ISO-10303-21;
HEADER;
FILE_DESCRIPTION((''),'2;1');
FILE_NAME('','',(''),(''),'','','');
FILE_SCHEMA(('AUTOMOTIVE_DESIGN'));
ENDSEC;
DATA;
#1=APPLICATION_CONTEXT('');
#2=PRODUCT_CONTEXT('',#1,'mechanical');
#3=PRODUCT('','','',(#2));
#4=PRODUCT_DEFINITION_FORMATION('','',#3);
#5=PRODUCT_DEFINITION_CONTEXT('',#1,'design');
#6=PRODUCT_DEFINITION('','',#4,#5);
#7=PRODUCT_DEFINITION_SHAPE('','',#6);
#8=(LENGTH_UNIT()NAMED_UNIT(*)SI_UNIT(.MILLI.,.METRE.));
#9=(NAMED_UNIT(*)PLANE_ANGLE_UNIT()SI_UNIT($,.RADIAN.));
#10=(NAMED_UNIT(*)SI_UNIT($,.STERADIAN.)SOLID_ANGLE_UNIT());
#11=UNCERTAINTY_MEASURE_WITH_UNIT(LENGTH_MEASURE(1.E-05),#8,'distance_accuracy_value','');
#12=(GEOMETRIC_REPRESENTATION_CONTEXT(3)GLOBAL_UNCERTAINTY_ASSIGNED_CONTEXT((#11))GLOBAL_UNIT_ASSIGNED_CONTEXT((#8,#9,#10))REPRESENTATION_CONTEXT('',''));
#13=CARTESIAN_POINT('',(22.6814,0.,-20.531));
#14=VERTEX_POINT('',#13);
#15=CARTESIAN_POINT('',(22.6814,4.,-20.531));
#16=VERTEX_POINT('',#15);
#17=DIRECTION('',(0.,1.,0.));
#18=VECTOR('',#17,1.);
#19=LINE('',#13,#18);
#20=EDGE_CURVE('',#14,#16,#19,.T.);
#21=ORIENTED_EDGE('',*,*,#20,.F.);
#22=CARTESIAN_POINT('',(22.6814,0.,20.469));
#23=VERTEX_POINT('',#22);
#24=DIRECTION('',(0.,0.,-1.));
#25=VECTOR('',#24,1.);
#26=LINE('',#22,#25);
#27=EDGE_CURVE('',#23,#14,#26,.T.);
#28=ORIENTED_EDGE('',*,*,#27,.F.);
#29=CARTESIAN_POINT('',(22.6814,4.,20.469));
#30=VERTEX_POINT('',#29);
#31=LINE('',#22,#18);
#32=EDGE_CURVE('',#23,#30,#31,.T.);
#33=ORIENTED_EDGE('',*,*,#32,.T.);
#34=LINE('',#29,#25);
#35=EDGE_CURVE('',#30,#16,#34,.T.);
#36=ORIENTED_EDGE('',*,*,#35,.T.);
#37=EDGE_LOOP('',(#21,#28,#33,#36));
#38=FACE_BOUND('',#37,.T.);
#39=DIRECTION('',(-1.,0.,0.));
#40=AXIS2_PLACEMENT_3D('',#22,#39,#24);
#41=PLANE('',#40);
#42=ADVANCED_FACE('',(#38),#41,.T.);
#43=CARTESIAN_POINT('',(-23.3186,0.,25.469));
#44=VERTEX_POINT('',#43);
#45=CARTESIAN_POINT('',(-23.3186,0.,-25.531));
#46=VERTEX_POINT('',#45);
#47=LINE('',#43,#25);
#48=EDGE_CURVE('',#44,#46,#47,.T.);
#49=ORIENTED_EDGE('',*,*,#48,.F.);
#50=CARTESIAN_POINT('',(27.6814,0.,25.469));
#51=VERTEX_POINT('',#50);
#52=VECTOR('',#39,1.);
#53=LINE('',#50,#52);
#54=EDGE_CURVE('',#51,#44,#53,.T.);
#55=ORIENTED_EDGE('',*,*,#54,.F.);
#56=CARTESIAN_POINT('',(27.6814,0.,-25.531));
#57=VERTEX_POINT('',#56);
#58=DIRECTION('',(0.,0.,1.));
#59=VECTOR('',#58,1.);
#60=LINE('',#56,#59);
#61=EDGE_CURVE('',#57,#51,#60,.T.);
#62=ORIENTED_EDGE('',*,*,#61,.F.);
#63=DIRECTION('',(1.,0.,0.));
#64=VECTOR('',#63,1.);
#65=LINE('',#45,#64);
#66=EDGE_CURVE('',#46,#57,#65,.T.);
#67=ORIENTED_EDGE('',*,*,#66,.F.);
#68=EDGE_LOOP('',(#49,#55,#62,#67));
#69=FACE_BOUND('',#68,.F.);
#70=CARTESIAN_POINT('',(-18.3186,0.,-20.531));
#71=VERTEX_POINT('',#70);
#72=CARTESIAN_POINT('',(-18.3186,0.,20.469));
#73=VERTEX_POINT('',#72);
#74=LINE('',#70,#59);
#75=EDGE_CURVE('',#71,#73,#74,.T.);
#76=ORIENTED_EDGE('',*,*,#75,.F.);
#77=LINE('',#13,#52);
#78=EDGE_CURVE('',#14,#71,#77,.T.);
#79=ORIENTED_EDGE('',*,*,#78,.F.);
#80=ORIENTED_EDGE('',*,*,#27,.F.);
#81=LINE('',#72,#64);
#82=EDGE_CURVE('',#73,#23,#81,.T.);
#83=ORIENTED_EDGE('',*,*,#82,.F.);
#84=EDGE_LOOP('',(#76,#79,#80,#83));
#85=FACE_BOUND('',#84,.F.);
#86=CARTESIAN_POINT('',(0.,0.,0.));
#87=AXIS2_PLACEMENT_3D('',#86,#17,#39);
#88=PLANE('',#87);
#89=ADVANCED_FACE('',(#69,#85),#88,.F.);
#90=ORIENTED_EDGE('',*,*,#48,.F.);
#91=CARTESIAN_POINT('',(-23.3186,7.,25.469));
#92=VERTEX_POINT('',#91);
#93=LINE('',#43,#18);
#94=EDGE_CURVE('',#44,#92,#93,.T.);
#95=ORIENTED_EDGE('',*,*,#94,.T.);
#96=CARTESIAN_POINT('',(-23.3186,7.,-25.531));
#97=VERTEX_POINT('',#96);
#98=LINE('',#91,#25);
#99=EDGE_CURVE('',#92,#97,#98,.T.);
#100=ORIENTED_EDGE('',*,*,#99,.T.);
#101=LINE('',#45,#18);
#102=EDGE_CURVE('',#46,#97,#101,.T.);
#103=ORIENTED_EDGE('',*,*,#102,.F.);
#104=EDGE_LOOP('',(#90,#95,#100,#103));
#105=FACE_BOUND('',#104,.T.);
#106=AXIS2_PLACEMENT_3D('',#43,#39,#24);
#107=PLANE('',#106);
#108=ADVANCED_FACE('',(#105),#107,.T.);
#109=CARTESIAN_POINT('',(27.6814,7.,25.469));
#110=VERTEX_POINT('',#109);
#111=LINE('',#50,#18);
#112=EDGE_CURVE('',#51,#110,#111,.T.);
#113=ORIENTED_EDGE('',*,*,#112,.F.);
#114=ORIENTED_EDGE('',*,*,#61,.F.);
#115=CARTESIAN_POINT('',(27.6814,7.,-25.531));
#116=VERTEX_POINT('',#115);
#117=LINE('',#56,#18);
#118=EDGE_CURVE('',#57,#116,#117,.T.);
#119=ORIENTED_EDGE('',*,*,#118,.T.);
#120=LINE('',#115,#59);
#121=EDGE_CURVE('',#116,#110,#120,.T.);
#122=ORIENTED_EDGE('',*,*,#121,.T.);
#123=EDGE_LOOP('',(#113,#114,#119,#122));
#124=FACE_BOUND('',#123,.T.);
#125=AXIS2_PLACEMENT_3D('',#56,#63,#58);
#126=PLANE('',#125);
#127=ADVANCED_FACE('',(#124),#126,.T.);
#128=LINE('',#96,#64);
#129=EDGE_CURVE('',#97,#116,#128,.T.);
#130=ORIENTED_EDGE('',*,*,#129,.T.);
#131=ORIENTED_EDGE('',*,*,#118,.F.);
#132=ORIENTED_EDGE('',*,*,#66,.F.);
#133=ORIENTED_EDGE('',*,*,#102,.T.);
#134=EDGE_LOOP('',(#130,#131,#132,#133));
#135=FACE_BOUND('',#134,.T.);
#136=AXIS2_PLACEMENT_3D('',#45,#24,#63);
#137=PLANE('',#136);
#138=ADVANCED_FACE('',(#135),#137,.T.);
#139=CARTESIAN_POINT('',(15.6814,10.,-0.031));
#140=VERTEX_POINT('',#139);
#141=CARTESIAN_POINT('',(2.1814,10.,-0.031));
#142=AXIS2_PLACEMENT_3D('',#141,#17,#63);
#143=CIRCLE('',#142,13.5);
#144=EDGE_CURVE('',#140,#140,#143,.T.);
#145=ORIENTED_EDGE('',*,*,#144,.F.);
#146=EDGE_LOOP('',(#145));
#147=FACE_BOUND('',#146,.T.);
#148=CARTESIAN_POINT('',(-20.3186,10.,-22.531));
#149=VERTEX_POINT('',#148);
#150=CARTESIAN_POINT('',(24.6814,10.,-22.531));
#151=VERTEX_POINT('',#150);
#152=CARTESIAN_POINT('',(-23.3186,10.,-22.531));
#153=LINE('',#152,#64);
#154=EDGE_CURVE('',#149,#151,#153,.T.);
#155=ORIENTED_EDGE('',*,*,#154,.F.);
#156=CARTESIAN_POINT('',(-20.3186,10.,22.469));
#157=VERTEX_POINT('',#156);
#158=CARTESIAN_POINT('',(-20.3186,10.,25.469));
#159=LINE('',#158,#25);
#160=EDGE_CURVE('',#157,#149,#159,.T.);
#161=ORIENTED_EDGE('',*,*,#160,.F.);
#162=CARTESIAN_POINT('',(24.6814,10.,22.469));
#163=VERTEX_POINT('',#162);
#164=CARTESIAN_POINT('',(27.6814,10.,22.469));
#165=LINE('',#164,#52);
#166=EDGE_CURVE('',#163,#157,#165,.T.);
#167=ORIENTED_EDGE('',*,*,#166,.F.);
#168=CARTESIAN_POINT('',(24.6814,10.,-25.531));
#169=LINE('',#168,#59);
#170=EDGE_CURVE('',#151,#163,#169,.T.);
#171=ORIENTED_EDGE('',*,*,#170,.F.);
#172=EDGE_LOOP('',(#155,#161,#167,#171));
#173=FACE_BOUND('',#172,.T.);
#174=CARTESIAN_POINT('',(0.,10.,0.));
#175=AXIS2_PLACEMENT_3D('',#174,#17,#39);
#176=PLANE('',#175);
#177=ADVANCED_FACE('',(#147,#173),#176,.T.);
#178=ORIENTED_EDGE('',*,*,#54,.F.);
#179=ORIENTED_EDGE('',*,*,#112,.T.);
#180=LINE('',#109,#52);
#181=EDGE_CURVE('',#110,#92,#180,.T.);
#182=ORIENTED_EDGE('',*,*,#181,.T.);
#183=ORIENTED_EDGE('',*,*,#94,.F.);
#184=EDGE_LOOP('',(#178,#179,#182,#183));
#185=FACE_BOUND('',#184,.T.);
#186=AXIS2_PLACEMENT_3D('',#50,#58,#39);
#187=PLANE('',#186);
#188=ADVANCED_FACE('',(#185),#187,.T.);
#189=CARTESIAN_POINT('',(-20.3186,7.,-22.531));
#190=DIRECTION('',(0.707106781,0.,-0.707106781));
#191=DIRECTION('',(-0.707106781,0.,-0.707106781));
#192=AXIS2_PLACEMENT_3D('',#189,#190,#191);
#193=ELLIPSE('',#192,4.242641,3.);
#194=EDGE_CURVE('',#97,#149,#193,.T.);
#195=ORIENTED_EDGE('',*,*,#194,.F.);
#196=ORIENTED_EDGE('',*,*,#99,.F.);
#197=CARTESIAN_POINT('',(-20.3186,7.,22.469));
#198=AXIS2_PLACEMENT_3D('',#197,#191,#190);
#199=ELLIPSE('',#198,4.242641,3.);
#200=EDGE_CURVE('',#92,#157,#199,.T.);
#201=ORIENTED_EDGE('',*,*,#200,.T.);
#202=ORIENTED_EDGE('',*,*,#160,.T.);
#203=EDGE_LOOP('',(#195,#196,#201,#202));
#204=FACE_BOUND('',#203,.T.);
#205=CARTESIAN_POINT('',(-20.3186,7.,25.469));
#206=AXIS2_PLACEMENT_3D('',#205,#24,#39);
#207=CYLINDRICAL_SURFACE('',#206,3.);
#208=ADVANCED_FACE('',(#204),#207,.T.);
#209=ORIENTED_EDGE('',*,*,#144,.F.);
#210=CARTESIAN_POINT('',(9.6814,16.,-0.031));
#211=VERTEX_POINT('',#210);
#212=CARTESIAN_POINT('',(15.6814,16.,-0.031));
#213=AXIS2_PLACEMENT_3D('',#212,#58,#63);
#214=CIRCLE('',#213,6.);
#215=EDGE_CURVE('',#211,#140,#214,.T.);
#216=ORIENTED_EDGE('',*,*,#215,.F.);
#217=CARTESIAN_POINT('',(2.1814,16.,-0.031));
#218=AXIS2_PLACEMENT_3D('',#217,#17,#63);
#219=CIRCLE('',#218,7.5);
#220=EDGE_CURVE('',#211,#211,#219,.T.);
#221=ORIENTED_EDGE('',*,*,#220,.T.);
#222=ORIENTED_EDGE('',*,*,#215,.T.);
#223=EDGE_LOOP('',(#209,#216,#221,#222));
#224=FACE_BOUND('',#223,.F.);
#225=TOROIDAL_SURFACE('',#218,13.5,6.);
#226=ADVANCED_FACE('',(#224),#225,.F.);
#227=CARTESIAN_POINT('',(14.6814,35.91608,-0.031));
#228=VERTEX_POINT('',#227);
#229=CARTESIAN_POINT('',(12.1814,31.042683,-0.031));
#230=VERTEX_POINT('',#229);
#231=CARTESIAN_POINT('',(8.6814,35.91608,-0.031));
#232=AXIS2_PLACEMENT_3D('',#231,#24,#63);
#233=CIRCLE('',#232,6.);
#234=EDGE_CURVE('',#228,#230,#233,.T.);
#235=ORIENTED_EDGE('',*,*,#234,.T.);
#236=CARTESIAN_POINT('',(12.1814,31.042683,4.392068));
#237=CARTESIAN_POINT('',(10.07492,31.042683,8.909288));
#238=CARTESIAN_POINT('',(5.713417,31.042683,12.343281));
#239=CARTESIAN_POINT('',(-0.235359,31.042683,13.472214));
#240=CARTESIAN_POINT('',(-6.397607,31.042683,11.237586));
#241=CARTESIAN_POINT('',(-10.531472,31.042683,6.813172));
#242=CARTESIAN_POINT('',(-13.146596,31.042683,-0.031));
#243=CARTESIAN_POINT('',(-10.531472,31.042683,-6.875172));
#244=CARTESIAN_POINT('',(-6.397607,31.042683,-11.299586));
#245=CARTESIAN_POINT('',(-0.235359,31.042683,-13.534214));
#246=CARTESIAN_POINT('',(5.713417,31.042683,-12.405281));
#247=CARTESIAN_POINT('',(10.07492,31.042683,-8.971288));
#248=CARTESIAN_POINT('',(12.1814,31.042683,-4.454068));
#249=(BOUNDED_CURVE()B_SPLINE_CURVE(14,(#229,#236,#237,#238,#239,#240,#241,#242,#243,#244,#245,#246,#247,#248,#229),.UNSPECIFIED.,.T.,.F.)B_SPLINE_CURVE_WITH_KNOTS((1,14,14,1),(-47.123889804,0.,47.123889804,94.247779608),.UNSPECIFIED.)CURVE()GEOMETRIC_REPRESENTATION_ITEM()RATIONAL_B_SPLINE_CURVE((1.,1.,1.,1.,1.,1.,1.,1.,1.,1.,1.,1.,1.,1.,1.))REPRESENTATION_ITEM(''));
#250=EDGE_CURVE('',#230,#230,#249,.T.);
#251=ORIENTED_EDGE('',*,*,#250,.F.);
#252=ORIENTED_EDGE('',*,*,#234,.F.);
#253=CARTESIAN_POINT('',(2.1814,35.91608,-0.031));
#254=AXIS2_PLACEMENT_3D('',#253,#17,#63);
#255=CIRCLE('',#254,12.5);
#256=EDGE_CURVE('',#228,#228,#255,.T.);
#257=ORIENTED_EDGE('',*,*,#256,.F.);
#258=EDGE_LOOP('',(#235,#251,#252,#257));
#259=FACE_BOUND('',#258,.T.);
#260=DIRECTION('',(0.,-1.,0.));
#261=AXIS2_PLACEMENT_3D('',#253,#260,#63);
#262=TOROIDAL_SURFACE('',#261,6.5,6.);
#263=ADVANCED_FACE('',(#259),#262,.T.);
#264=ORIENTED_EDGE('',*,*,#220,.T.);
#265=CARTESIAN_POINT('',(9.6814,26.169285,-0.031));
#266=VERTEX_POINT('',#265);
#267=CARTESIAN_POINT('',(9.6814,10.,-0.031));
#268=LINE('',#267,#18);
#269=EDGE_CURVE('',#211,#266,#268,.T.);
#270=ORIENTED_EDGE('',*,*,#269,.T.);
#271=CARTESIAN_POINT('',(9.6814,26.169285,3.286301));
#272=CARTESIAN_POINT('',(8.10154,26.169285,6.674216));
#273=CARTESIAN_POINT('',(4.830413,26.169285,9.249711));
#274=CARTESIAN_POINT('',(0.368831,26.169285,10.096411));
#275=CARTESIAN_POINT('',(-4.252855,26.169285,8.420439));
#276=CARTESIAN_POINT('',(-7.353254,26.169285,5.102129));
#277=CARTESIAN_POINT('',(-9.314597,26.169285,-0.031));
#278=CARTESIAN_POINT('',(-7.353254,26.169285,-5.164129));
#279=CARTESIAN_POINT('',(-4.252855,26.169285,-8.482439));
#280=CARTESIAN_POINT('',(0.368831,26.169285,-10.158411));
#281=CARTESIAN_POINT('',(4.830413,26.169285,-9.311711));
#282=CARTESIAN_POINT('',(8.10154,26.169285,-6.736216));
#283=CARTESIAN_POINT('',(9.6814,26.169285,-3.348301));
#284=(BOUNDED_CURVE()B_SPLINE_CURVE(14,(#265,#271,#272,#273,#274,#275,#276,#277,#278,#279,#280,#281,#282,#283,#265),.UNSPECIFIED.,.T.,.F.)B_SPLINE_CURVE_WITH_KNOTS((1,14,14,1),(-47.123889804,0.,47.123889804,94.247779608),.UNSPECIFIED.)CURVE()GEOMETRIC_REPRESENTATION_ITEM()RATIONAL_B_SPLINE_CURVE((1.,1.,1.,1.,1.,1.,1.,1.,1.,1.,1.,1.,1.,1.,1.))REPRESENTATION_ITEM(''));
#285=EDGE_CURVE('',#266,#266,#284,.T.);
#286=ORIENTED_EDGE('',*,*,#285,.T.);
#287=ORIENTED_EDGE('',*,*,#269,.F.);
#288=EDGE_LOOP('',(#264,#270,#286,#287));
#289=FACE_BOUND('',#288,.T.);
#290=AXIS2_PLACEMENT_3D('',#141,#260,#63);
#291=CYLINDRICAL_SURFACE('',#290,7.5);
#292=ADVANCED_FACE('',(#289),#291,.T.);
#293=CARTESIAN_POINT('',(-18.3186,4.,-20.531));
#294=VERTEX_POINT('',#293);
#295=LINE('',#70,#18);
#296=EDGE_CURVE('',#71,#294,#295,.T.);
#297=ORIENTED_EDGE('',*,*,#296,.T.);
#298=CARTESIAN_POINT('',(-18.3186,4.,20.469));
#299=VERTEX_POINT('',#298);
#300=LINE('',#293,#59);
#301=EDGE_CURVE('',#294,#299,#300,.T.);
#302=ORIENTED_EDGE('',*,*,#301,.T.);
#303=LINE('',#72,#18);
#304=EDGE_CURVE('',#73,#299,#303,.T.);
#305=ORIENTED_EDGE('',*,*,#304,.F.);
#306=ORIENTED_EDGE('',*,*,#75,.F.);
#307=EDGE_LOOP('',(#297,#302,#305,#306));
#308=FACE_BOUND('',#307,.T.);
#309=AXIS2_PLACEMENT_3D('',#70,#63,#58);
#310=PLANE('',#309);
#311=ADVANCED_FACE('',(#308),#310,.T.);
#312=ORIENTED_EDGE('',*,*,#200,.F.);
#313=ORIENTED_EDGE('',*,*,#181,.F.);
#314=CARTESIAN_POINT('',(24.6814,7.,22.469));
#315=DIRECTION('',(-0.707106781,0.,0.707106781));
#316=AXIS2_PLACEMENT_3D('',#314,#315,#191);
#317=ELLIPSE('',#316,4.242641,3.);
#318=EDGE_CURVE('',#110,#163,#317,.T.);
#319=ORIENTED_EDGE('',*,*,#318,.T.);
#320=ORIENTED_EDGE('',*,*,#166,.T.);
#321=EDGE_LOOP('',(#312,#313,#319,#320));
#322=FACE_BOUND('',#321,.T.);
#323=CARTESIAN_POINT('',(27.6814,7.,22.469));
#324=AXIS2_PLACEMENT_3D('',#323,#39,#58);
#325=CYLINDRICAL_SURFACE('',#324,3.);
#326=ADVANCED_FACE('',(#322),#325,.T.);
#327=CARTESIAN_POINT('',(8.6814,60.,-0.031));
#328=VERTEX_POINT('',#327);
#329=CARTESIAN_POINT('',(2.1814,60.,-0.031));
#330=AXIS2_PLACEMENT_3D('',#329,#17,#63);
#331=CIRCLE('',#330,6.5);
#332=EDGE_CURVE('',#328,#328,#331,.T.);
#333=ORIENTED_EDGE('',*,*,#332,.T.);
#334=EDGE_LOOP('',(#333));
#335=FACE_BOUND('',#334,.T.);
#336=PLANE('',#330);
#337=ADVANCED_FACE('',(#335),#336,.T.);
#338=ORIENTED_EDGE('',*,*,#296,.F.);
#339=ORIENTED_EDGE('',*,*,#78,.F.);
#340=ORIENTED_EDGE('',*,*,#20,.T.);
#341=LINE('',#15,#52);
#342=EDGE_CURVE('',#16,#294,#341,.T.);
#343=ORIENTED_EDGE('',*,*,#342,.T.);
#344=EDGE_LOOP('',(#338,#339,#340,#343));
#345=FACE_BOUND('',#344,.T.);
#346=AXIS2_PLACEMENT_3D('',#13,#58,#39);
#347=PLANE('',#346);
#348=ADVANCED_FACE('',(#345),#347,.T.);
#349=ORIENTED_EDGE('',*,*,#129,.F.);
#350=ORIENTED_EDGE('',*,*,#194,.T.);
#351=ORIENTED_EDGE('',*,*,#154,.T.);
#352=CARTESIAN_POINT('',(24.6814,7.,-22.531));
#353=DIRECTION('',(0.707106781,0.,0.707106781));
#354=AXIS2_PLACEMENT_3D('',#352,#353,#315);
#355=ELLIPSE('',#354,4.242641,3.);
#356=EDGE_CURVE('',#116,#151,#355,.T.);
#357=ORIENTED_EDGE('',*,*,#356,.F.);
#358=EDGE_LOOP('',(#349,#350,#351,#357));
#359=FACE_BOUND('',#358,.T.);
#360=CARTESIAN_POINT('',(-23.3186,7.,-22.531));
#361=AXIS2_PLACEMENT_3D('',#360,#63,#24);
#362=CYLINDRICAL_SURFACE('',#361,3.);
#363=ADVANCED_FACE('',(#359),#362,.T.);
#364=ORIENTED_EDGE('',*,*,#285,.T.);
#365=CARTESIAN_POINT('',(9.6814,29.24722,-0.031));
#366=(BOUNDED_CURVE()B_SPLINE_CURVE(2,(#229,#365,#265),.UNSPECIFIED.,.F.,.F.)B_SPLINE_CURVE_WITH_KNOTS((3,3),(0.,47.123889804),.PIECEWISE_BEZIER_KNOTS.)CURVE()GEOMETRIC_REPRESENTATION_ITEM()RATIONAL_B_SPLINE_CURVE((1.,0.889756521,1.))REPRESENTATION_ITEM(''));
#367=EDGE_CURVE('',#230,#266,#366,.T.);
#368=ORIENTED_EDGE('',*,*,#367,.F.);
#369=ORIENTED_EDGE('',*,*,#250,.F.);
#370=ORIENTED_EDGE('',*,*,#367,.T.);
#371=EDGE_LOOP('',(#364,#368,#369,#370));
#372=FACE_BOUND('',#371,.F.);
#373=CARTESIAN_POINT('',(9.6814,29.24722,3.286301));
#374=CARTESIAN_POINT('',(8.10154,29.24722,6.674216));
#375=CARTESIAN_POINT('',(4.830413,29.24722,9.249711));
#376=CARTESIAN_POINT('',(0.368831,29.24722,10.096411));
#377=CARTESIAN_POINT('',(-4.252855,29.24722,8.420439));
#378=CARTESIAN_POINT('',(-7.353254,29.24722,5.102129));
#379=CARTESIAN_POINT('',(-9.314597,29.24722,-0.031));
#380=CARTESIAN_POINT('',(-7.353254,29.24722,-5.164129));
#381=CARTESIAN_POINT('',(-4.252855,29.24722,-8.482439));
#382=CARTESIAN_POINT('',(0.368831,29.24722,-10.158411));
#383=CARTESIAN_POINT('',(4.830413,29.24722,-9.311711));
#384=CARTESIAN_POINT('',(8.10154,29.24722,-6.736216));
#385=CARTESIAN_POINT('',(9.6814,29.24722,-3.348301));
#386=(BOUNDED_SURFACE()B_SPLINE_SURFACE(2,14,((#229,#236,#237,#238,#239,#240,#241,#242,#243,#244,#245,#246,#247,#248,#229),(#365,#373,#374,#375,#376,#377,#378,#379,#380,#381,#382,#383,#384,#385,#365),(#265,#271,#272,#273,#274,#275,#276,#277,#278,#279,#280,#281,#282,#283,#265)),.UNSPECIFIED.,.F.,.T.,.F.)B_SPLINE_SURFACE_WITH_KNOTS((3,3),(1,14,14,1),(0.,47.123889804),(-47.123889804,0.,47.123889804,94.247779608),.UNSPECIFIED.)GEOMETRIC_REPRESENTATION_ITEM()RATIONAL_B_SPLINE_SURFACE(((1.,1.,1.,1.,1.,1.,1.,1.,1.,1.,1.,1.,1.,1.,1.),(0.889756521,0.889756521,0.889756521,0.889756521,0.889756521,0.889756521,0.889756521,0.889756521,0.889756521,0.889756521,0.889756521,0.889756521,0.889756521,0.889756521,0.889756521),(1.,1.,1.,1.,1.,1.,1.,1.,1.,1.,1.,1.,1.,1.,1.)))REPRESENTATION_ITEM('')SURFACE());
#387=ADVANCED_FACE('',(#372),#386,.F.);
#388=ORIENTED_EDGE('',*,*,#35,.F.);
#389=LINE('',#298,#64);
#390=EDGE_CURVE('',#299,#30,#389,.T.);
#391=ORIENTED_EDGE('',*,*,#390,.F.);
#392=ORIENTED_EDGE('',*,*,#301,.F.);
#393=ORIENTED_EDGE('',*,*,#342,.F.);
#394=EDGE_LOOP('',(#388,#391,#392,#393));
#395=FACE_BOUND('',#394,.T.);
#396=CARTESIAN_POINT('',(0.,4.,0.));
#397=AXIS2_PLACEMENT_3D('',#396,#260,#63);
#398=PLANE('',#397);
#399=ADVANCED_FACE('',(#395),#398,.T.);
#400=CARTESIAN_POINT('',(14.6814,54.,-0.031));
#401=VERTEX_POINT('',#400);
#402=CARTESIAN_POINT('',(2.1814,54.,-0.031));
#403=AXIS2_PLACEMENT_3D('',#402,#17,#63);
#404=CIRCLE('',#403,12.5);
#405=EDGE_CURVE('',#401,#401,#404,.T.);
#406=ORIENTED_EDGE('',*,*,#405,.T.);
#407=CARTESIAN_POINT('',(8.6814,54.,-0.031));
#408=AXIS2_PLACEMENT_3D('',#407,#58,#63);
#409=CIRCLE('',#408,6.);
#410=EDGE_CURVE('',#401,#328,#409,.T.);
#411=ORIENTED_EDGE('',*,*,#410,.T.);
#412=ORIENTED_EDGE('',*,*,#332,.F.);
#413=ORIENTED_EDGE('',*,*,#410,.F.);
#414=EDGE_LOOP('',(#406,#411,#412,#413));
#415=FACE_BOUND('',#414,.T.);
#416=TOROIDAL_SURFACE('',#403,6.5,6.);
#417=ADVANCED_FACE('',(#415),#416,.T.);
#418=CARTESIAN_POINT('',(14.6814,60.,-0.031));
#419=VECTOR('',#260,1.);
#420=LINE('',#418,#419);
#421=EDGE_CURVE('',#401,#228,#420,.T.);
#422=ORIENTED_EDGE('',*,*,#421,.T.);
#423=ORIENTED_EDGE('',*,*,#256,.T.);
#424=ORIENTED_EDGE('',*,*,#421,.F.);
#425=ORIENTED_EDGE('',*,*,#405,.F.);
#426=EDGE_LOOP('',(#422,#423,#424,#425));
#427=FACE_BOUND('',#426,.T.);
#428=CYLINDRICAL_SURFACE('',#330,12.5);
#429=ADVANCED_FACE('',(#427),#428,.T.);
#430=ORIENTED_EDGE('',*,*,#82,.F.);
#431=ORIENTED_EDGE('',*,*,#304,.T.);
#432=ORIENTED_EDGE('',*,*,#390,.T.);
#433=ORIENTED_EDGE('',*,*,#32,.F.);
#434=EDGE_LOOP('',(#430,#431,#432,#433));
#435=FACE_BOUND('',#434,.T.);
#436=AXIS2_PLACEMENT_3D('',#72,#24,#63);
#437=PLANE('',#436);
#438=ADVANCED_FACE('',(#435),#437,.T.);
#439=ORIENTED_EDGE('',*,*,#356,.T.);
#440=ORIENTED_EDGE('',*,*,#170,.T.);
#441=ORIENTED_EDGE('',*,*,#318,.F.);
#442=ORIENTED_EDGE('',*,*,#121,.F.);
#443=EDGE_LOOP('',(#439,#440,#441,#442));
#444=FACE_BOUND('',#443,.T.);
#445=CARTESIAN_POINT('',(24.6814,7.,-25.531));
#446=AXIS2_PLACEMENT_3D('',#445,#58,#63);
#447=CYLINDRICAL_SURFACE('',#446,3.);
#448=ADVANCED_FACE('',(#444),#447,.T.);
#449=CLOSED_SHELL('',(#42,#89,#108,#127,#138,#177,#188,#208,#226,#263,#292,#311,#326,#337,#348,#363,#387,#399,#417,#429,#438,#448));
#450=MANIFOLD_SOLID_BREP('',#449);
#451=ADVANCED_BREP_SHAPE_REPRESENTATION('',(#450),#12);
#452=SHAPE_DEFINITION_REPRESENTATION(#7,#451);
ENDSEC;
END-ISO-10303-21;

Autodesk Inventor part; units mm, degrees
ref_plane "YZ Plane" through (0, 0, 0) normal (1, 0, 0) x (0, 1, 0)
ref_plane "XZ Plane" through (0, 0, 0) normal (0, 1, 0) x (-1, 0, 0)
ref_plane "XY Plane" through (0, 0, 0) normal (0, 0, 1) x (1, 0, 0)
sketch "Sketch2" plane through (0, 0, 0) normal (0, 1, 0) x (-1, 0, 0)
  line L0 (18.3186, 20.469) -> (-22.6814, 20.469)
  line L1 (-22.6814, 20.469) -> (-22.6814, -20.531)
  line L2 (-22.6814, -20.531) -> (18.3186, -20.531)
  line L3 (18.3186, -20.531) -> (18.3186, 20.469)
  line L4 (-27.6814, 25.469) -> (23.3186, 25.469)
  line L5 (23.3186, 25.469) -> (23.3186, -25.531)
  line L6 (23.3186, -25.531) -> (-27.6814, -25.531)
  line L7 (-27.6814, -25.531) -> (-27.6814, 25.469)
  line L8 (-22.6814, 20.469) -> (18.3186, 20.469)
  line L9 (18.3186, 20.469) -> (18.3186, -20.531)
  line L10 (18.3186, -20.531) -> (-22.6814, -20.531)
  line L11 (-22.6814, -20.531) -> (-22.6814, 20.469)
  line L12 (-22.6814, 20.469) -> (18.3186, 20.469)
  line L13 (18.3186, 20.469) -> (18.3186, -20.531)
  line L14 (18.3186, -20.531) -> (-22.6814, -20.531)
  line L15 (-22.6814, -20.531) -> (-22.6814, 20.469)
  point P0 (0, 0)
  dimension "d0" = 41
  dimension "d1" = 41
  dimension "d6" = 5
extrude "Extrusion1" add sketch "Sketch2" along normal blind 10 contours L3 L2 L1 L0 | L4 L5 L6 L7
sketch "Sketch5" plane through (0, 0, 0) normal (0, -1, 0) x (1, 0, 0)
  line L0 (27.6814, 25.469) -> (-23.3186, 25.469)
  line L1 (-23.3186, 25.469) -> (-23.3186, -25.531)
  line L2 (-23.3186, -25.531) -> (27.6814, -25.531)
  line L3 (27.6814, -25.531) -> (27.6814, 25.469)
  line L4 (-18.3186, 20.469) -> (22.6814, 20.469)
  line L5 (22.6814, 20.469) -> (22.6814, -20.531)
  line L6 (22.6814, -20.531) -> (-18.3186, -20.531)
  line L7 (-18.3186, -20.531) -> (-18.3186, 20.469)
  point P0 (0, 0)
  dimension "d10" = 5
extrude "Extrusion2" cut sketch "Sketch5" against normal blind 4 contours L4 L5 L6 L7
fillet "Fillet1" radius 3 4 edges at (-23.3186, 10, -0.031) (2.1814, 10, 25.469) (27.6814, 10, -0.031) (2.1814, 10, -25.531)
sketch "Sketch6" plane through (0, 10, 0) normal (0, 1, 0) x (1, 0, 0)
  circle A0 centre (2.1814, 0.031) radius 7.5
  line L0 (-23.3186, 25.531) -> (27.6814, 25.531) projected
  line L1 (27.6814, -25.469) -> (-23.3186, -25.469) projected
  point P0 (0, 0)
  dimension "d14" = 15
extrude "Extrusion3" add sketch "Sketch6" along normal blind 50
sketch "Sketch7" plane through (2.1814, 60, -0.031) normal (0, 1, 0) x (1, 0, 0)
  circle A0 centre (0, 0) radius 12.5
  point P0 (-2.1814, -0.031)
  dimension "d17" = 25
extrude "Extrusion4" add sketch "Sketch7" against normal blind 30
fillet "Fillet2" radius 6 1 edges at (-10.3186, 60, -0.031)
fillet "Fillet3" radius 6 1 edges at (-10.3186, 30, -0.031)
fillet "Fillet4" radius 6 1 edges at (-5.3186, 30, -0.031)
fillet "Fillet5" radius 6 1 edges at (-5.3186, 10, -0.031)
properties part number "SMI Stamp Holder"
